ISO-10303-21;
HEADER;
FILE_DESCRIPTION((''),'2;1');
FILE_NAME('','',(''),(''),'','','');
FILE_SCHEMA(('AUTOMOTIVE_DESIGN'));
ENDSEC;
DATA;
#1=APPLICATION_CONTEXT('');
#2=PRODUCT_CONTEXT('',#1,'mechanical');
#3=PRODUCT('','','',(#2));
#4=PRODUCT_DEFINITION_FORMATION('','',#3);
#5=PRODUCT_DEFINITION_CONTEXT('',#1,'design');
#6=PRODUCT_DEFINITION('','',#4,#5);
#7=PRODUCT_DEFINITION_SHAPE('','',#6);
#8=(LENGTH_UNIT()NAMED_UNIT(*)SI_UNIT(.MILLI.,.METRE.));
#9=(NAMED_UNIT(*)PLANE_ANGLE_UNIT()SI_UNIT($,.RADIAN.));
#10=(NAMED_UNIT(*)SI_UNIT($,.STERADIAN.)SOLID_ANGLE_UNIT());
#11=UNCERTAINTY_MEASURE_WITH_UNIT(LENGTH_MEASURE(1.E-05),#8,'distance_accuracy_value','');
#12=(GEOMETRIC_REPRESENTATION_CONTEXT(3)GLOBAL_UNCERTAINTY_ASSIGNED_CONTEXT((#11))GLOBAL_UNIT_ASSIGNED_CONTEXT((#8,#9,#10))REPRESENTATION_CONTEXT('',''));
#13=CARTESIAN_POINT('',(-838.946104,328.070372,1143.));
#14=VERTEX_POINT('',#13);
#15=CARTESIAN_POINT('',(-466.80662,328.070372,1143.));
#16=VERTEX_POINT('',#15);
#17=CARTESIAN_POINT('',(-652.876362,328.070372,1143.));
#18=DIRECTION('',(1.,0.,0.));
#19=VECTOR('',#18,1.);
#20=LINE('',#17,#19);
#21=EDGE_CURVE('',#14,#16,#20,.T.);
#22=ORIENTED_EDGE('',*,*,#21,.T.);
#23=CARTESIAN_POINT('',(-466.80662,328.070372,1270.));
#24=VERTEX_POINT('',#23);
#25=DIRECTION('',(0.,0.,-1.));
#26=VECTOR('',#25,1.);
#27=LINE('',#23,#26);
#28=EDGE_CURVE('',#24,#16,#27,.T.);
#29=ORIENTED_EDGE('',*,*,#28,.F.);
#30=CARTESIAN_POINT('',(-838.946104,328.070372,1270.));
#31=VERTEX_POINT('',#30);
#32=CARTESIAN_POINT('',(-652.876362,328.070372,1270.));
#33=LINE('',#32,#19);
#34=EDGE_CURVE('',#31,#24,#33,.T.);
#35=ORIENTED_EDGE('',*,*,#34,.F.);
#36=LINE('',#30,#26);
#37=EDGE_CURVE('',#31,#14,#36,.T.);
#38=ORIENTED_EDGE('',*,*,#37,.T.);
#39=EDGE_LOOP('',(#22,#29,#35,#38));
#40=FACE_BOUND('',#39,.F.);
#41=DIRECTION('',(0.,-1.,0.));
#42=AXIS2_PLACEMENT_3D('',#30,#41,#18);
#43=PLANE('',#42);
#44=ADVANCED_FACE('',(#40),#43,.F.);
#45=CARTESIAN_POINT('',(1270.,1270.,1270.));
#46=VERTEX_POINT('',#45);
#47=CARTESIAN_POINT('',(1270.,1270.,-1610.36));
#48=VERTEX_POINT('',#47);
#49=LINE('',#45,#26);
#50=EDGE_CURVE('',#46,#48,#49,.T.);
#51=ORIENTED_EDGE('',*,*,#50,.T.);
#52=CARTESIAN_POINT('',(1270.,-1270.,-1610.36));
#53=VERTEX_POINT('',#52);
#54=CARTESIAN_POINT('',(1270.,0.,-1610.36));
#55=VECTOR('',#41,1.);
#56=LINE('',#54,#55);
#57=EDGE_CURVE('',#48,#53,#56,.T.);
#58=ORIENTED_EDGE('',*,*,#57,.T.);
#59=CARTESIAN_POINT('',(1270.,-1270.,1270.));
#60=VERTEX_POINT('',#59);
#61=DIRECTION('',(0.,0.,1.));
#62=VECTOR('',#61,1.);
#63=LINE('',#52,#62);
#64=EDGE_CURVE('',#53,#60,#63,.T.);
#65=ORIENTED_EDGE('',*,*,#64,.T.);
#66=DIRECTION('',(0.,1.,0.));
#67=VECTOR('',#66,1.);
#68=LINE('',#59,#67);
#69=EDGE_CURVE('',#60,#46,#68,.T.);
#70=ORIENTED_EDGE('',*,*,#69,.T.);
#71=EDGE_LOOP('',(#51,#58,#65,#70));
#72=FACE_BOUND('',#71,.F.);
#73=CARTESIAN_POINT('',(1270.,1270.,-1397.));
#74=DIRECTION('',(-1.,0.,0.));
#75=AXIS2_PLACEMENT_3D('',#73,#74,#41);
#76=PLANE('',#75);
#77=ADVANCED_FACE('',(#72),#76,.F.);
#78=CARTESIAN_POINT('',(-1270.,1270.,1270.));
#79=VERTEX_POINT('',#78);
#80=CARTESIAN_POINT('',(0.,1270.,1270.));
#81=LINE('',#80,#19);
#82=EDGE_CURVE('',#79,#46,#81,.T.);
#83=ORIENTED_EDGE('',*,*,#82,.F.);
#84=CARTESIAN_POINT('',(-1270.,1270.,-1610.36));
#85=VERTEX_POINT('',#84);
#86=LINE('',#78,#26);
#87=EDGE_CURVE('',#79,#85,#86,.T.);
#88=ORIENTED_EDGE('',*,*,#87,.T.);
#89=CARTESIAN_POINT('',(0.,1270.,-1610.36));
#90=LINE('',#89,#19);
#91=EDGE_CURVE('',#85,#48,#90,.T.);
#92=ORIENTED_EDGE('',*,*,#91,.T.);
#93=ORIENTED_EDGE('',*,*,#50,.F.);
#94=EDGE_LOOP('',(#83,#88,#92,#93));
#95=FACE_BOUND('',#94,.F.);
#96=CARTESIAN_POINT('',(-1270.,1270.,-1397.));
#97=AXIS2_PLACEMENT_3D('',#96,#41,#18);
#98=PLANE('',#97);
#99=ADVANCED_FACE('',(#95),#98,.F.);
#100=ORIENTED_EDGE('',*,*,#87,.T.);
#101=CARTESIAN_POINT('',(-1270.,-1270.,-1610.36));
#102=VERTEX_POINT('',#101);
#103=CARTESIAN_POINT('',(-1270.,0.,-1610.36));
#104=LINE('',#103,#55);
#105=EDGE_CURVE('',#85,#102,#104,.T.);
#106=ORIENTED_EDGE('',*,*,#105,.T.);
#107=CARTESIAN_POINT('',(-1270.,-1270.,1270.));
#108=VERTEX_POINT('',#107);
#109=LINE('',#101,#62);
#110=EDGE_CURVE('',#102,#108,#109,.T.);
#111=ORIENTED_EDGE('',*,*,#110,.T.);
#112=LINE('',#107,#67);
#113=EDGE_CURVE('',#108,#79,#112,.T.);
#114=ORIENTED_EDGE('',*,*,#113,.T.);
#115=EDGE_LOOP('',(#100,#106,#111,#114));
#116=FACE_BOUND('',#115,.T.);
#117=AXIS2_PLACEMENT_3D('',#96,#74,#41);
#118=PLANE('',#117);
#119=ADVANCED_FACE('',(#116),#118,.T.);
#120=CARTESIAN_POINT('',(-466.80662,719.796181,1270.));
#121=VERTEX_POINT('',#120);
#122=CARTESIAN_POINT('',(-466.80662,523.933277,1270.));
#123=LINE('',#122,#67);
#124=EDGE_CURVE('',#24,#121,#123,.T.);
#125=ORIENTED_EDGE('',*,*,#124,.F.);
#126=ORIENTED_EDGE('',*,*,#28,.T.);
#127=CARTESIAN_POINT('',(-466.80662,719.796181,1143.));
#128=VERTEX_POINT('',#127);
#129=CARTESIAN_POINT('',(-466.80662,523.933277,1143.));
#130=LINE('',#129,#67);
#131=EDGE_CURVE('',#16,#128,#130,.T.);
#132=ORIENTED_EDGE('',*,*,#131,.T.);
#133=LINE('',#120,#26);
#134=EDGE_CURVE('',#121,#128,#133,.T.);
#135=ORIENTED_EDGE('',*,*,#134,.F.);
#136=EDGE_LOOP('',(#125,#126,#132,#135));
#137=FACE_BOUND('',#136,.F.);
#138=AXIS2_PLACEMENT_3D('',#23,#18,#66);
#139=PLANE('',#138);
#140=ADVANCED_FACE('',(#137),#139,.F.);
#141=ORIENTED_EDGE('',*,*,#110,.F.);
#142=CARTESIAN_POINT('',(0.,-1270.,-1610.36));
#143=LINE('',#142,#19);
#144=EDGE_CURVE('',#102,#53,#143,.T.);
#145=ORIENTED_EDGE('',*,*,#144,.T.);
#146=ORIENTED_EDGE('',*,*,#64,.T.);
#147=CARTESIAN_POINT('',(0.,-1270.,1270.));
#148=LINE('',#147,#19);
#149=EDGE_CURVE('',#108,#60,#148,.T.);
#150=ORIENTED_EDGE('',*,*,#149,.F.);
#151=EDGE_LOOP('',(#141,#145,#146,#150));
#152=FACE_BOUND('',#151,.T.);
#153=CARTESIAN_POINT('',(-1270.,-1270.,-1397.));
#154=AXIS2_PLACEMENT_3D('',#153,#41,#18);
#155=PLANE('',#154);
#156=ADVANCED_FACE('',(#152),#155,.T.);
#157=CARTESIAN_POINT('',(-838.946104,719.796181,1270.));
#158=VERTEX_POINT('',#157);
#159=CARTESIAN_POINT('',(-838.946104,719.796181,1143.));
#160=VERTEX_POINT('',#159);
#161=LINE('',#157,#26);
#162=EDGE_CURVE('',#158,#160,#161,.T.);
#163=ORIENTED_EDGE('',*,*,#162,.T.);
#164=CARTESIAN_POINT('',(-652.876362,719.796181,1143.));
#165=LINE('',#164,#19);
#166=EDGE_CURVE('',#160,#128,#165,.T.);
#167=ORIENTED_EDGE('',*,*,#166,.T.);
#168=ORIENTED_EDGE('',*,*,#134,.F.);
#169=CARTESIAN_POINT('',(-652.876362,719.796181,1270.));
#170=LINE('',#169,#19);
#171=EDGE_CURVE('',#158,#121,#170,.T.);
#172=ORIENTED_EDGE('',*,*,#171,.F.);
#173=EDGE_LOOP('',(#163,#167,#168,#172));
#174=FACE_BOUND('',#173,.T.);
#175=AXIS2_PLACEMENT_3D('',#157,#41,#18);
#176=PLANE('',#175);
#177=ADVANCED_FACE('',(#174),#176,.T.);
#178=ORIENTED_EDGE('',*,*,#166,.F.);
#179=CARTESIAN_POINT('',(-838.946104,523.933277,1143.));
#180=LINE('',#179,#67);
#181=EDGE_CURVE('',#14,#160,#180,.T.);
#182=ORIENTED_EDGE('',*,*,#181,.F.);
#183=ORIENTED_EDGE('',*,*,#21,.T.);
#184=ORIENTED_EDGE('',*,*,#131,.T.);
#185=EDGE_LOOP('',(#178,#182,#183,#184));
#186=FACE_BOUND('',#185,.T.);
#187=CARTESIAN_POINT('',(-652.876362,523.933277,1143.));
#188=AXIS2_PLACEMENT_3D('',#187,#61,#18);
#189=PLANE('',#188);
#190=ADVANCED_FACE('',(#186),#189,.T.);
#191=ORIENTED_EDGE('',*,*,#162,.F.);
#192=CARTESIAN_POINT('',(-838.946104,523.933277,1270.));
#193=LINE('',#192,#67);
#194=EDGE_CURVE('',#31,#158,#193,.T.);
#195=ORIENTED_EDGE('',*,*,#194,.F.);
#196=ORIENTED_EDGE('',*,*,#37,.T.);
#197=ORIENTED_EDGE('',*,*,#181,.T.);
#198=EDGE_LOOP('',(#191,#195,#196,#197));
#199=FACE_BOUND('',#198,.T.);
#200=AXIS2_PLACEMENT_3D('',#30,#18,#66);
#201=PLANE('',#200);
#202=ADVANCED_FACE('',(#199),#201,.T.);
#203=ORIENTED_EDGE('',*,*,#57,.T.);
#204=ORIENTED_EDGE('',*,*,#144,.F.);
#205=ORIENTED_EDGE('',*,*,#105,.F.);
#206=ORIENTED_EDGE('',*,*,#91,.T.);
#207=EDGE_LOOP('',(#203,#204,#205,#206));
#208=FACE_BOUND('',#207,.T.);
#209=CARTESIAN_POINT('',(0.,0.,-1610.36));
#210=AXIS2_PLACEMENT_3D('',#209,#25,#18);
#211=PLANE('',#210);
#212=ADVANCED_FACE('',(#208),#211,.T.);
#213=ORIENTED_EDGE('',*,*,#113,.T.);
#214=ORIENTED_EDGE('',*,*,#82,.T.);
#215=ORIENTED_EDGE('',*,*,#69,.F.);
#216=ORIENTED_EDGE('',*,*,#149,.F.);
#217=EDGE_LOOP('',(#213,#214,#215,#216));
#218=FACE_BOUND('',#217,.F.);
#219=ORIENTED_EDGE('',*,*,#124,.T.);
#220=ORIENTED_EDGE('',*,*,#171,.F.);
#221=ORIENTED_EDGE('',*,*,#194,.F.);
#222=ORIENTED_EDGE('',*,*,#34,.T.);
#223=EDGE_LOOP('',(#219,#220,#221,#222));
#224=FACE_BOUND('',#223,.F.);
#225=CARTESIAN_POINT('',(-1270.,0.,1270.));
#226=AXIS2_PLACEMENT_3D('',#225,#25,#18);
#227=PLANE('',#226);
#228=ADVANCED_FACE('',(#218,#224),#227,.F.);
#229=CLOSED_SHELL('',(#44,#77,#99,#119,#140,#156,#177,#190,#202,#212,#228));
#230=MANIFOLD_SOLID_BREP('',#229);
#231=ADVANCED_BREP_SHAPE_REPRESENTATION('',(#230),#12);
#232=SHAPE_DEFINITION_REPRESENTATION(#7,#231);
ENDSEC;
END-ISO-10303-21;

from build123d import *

# Parameters (mm, degrees)
F1_W      = 2540
F1_H      = 2540
F2_DEPTH  = 1270
F3_W      = 372.1394836903
F3_H      = 391.725808382
F4_DEPTH  = 127
F5_W      = 2540
F5_H      = 2540
F5_W_2    = 372.1394836903
F5_H_2    = 391.725808382
F6_DEPTH  = 127
F7_DEPTH  = 127
F8_DEPTH  = 127
F6_FACE_W = 2540
F6_FACE_H = 2540
F9_DEPTH  = 213.36


# Not quite as in the source:
# - a variable given as a bare number and used for a length is read in inches; the dataset says mm whatever the document's units were


with BuildPart() as f2:
    # F1 (on Front) → F2 (new body, symmetric)
    with BuildSketch(Plane.XZ):
        Rectangle(F1_W, F1_H)
    extrude(amount=F2_DEPTH, both=True)

    # F3 (on face) → F4 (cut)
    with BuildSketch(Plane.XY.offset(1270)):
        with Locations((-652.8763622046, 523.9332765341)):
            Rectangle(F3_W, F3_H)
    extrude(amount=-F4_DEPTH, mode=Mode.SUBTRACT)

    # F5 (on face) → F6 (join)
    with BuildSketch(Plane(origin=(0, 0, -1270), x_dir=(1, 0, 0), z_dir=(0, 0, -1))):
        Rectangle(F5_W, F5_H)
        with Locations((-652.8763622046, -523.9332765341)):
            Rectangle(F5_W_2, F5_H_2, mode=Mode.SUBTRACT)
        with Locations((-652.8763622046, -523.9332765341)):
            Rectangle(F5_W_2, F5_H_2)
    extrude(amount=F6_DEPTH)

    # F5 (on face) → F7 (join)
    with BuildSketch(Plane(origin=(0, 0, -1270), x_dir=(1, 0, 0), z_dir=(0, 0, -1))):
        with Locations((-652.8763622046, -523.9332765341)):
            Rectangle(F5_W_2, F5_H_2)
    extrude(amount=F7_DEPTH)

    # F5 (on face) → F8 (join)
    with BuildSketch(Plane(origin=(0, 0, -1270), x_dir=(1, 0, 0), z_dir=(0, 0, -1))):
        with Locations((-652.8763622046, -523.9332765341)):
            Rectangle(F5_W_2, F5_H_2)
    extrude(amount=F8_DEPTH)

    # F5 (on face) + F6_face (on face) → F9 (join)
    with BuildSketch(Plane(origin=(0, 0, -1270), x_dir=(1, 0, 0), z_dir=(0, 0, -1))):
        with Locations((-652.8763622046, -523.9332765341)):
            Rectangle(F5_W_2, F5_H_2)
    with BuildSketch(Plane(origin=(0, 0, -1397), x_dir=(1, 0, 0), z_dir=(0, 0, -1))):
        Rectangle(F6_FACE_W, F6_FACE_H)
    extrude(amount=F9_DEPTH)


solid = f2.part
